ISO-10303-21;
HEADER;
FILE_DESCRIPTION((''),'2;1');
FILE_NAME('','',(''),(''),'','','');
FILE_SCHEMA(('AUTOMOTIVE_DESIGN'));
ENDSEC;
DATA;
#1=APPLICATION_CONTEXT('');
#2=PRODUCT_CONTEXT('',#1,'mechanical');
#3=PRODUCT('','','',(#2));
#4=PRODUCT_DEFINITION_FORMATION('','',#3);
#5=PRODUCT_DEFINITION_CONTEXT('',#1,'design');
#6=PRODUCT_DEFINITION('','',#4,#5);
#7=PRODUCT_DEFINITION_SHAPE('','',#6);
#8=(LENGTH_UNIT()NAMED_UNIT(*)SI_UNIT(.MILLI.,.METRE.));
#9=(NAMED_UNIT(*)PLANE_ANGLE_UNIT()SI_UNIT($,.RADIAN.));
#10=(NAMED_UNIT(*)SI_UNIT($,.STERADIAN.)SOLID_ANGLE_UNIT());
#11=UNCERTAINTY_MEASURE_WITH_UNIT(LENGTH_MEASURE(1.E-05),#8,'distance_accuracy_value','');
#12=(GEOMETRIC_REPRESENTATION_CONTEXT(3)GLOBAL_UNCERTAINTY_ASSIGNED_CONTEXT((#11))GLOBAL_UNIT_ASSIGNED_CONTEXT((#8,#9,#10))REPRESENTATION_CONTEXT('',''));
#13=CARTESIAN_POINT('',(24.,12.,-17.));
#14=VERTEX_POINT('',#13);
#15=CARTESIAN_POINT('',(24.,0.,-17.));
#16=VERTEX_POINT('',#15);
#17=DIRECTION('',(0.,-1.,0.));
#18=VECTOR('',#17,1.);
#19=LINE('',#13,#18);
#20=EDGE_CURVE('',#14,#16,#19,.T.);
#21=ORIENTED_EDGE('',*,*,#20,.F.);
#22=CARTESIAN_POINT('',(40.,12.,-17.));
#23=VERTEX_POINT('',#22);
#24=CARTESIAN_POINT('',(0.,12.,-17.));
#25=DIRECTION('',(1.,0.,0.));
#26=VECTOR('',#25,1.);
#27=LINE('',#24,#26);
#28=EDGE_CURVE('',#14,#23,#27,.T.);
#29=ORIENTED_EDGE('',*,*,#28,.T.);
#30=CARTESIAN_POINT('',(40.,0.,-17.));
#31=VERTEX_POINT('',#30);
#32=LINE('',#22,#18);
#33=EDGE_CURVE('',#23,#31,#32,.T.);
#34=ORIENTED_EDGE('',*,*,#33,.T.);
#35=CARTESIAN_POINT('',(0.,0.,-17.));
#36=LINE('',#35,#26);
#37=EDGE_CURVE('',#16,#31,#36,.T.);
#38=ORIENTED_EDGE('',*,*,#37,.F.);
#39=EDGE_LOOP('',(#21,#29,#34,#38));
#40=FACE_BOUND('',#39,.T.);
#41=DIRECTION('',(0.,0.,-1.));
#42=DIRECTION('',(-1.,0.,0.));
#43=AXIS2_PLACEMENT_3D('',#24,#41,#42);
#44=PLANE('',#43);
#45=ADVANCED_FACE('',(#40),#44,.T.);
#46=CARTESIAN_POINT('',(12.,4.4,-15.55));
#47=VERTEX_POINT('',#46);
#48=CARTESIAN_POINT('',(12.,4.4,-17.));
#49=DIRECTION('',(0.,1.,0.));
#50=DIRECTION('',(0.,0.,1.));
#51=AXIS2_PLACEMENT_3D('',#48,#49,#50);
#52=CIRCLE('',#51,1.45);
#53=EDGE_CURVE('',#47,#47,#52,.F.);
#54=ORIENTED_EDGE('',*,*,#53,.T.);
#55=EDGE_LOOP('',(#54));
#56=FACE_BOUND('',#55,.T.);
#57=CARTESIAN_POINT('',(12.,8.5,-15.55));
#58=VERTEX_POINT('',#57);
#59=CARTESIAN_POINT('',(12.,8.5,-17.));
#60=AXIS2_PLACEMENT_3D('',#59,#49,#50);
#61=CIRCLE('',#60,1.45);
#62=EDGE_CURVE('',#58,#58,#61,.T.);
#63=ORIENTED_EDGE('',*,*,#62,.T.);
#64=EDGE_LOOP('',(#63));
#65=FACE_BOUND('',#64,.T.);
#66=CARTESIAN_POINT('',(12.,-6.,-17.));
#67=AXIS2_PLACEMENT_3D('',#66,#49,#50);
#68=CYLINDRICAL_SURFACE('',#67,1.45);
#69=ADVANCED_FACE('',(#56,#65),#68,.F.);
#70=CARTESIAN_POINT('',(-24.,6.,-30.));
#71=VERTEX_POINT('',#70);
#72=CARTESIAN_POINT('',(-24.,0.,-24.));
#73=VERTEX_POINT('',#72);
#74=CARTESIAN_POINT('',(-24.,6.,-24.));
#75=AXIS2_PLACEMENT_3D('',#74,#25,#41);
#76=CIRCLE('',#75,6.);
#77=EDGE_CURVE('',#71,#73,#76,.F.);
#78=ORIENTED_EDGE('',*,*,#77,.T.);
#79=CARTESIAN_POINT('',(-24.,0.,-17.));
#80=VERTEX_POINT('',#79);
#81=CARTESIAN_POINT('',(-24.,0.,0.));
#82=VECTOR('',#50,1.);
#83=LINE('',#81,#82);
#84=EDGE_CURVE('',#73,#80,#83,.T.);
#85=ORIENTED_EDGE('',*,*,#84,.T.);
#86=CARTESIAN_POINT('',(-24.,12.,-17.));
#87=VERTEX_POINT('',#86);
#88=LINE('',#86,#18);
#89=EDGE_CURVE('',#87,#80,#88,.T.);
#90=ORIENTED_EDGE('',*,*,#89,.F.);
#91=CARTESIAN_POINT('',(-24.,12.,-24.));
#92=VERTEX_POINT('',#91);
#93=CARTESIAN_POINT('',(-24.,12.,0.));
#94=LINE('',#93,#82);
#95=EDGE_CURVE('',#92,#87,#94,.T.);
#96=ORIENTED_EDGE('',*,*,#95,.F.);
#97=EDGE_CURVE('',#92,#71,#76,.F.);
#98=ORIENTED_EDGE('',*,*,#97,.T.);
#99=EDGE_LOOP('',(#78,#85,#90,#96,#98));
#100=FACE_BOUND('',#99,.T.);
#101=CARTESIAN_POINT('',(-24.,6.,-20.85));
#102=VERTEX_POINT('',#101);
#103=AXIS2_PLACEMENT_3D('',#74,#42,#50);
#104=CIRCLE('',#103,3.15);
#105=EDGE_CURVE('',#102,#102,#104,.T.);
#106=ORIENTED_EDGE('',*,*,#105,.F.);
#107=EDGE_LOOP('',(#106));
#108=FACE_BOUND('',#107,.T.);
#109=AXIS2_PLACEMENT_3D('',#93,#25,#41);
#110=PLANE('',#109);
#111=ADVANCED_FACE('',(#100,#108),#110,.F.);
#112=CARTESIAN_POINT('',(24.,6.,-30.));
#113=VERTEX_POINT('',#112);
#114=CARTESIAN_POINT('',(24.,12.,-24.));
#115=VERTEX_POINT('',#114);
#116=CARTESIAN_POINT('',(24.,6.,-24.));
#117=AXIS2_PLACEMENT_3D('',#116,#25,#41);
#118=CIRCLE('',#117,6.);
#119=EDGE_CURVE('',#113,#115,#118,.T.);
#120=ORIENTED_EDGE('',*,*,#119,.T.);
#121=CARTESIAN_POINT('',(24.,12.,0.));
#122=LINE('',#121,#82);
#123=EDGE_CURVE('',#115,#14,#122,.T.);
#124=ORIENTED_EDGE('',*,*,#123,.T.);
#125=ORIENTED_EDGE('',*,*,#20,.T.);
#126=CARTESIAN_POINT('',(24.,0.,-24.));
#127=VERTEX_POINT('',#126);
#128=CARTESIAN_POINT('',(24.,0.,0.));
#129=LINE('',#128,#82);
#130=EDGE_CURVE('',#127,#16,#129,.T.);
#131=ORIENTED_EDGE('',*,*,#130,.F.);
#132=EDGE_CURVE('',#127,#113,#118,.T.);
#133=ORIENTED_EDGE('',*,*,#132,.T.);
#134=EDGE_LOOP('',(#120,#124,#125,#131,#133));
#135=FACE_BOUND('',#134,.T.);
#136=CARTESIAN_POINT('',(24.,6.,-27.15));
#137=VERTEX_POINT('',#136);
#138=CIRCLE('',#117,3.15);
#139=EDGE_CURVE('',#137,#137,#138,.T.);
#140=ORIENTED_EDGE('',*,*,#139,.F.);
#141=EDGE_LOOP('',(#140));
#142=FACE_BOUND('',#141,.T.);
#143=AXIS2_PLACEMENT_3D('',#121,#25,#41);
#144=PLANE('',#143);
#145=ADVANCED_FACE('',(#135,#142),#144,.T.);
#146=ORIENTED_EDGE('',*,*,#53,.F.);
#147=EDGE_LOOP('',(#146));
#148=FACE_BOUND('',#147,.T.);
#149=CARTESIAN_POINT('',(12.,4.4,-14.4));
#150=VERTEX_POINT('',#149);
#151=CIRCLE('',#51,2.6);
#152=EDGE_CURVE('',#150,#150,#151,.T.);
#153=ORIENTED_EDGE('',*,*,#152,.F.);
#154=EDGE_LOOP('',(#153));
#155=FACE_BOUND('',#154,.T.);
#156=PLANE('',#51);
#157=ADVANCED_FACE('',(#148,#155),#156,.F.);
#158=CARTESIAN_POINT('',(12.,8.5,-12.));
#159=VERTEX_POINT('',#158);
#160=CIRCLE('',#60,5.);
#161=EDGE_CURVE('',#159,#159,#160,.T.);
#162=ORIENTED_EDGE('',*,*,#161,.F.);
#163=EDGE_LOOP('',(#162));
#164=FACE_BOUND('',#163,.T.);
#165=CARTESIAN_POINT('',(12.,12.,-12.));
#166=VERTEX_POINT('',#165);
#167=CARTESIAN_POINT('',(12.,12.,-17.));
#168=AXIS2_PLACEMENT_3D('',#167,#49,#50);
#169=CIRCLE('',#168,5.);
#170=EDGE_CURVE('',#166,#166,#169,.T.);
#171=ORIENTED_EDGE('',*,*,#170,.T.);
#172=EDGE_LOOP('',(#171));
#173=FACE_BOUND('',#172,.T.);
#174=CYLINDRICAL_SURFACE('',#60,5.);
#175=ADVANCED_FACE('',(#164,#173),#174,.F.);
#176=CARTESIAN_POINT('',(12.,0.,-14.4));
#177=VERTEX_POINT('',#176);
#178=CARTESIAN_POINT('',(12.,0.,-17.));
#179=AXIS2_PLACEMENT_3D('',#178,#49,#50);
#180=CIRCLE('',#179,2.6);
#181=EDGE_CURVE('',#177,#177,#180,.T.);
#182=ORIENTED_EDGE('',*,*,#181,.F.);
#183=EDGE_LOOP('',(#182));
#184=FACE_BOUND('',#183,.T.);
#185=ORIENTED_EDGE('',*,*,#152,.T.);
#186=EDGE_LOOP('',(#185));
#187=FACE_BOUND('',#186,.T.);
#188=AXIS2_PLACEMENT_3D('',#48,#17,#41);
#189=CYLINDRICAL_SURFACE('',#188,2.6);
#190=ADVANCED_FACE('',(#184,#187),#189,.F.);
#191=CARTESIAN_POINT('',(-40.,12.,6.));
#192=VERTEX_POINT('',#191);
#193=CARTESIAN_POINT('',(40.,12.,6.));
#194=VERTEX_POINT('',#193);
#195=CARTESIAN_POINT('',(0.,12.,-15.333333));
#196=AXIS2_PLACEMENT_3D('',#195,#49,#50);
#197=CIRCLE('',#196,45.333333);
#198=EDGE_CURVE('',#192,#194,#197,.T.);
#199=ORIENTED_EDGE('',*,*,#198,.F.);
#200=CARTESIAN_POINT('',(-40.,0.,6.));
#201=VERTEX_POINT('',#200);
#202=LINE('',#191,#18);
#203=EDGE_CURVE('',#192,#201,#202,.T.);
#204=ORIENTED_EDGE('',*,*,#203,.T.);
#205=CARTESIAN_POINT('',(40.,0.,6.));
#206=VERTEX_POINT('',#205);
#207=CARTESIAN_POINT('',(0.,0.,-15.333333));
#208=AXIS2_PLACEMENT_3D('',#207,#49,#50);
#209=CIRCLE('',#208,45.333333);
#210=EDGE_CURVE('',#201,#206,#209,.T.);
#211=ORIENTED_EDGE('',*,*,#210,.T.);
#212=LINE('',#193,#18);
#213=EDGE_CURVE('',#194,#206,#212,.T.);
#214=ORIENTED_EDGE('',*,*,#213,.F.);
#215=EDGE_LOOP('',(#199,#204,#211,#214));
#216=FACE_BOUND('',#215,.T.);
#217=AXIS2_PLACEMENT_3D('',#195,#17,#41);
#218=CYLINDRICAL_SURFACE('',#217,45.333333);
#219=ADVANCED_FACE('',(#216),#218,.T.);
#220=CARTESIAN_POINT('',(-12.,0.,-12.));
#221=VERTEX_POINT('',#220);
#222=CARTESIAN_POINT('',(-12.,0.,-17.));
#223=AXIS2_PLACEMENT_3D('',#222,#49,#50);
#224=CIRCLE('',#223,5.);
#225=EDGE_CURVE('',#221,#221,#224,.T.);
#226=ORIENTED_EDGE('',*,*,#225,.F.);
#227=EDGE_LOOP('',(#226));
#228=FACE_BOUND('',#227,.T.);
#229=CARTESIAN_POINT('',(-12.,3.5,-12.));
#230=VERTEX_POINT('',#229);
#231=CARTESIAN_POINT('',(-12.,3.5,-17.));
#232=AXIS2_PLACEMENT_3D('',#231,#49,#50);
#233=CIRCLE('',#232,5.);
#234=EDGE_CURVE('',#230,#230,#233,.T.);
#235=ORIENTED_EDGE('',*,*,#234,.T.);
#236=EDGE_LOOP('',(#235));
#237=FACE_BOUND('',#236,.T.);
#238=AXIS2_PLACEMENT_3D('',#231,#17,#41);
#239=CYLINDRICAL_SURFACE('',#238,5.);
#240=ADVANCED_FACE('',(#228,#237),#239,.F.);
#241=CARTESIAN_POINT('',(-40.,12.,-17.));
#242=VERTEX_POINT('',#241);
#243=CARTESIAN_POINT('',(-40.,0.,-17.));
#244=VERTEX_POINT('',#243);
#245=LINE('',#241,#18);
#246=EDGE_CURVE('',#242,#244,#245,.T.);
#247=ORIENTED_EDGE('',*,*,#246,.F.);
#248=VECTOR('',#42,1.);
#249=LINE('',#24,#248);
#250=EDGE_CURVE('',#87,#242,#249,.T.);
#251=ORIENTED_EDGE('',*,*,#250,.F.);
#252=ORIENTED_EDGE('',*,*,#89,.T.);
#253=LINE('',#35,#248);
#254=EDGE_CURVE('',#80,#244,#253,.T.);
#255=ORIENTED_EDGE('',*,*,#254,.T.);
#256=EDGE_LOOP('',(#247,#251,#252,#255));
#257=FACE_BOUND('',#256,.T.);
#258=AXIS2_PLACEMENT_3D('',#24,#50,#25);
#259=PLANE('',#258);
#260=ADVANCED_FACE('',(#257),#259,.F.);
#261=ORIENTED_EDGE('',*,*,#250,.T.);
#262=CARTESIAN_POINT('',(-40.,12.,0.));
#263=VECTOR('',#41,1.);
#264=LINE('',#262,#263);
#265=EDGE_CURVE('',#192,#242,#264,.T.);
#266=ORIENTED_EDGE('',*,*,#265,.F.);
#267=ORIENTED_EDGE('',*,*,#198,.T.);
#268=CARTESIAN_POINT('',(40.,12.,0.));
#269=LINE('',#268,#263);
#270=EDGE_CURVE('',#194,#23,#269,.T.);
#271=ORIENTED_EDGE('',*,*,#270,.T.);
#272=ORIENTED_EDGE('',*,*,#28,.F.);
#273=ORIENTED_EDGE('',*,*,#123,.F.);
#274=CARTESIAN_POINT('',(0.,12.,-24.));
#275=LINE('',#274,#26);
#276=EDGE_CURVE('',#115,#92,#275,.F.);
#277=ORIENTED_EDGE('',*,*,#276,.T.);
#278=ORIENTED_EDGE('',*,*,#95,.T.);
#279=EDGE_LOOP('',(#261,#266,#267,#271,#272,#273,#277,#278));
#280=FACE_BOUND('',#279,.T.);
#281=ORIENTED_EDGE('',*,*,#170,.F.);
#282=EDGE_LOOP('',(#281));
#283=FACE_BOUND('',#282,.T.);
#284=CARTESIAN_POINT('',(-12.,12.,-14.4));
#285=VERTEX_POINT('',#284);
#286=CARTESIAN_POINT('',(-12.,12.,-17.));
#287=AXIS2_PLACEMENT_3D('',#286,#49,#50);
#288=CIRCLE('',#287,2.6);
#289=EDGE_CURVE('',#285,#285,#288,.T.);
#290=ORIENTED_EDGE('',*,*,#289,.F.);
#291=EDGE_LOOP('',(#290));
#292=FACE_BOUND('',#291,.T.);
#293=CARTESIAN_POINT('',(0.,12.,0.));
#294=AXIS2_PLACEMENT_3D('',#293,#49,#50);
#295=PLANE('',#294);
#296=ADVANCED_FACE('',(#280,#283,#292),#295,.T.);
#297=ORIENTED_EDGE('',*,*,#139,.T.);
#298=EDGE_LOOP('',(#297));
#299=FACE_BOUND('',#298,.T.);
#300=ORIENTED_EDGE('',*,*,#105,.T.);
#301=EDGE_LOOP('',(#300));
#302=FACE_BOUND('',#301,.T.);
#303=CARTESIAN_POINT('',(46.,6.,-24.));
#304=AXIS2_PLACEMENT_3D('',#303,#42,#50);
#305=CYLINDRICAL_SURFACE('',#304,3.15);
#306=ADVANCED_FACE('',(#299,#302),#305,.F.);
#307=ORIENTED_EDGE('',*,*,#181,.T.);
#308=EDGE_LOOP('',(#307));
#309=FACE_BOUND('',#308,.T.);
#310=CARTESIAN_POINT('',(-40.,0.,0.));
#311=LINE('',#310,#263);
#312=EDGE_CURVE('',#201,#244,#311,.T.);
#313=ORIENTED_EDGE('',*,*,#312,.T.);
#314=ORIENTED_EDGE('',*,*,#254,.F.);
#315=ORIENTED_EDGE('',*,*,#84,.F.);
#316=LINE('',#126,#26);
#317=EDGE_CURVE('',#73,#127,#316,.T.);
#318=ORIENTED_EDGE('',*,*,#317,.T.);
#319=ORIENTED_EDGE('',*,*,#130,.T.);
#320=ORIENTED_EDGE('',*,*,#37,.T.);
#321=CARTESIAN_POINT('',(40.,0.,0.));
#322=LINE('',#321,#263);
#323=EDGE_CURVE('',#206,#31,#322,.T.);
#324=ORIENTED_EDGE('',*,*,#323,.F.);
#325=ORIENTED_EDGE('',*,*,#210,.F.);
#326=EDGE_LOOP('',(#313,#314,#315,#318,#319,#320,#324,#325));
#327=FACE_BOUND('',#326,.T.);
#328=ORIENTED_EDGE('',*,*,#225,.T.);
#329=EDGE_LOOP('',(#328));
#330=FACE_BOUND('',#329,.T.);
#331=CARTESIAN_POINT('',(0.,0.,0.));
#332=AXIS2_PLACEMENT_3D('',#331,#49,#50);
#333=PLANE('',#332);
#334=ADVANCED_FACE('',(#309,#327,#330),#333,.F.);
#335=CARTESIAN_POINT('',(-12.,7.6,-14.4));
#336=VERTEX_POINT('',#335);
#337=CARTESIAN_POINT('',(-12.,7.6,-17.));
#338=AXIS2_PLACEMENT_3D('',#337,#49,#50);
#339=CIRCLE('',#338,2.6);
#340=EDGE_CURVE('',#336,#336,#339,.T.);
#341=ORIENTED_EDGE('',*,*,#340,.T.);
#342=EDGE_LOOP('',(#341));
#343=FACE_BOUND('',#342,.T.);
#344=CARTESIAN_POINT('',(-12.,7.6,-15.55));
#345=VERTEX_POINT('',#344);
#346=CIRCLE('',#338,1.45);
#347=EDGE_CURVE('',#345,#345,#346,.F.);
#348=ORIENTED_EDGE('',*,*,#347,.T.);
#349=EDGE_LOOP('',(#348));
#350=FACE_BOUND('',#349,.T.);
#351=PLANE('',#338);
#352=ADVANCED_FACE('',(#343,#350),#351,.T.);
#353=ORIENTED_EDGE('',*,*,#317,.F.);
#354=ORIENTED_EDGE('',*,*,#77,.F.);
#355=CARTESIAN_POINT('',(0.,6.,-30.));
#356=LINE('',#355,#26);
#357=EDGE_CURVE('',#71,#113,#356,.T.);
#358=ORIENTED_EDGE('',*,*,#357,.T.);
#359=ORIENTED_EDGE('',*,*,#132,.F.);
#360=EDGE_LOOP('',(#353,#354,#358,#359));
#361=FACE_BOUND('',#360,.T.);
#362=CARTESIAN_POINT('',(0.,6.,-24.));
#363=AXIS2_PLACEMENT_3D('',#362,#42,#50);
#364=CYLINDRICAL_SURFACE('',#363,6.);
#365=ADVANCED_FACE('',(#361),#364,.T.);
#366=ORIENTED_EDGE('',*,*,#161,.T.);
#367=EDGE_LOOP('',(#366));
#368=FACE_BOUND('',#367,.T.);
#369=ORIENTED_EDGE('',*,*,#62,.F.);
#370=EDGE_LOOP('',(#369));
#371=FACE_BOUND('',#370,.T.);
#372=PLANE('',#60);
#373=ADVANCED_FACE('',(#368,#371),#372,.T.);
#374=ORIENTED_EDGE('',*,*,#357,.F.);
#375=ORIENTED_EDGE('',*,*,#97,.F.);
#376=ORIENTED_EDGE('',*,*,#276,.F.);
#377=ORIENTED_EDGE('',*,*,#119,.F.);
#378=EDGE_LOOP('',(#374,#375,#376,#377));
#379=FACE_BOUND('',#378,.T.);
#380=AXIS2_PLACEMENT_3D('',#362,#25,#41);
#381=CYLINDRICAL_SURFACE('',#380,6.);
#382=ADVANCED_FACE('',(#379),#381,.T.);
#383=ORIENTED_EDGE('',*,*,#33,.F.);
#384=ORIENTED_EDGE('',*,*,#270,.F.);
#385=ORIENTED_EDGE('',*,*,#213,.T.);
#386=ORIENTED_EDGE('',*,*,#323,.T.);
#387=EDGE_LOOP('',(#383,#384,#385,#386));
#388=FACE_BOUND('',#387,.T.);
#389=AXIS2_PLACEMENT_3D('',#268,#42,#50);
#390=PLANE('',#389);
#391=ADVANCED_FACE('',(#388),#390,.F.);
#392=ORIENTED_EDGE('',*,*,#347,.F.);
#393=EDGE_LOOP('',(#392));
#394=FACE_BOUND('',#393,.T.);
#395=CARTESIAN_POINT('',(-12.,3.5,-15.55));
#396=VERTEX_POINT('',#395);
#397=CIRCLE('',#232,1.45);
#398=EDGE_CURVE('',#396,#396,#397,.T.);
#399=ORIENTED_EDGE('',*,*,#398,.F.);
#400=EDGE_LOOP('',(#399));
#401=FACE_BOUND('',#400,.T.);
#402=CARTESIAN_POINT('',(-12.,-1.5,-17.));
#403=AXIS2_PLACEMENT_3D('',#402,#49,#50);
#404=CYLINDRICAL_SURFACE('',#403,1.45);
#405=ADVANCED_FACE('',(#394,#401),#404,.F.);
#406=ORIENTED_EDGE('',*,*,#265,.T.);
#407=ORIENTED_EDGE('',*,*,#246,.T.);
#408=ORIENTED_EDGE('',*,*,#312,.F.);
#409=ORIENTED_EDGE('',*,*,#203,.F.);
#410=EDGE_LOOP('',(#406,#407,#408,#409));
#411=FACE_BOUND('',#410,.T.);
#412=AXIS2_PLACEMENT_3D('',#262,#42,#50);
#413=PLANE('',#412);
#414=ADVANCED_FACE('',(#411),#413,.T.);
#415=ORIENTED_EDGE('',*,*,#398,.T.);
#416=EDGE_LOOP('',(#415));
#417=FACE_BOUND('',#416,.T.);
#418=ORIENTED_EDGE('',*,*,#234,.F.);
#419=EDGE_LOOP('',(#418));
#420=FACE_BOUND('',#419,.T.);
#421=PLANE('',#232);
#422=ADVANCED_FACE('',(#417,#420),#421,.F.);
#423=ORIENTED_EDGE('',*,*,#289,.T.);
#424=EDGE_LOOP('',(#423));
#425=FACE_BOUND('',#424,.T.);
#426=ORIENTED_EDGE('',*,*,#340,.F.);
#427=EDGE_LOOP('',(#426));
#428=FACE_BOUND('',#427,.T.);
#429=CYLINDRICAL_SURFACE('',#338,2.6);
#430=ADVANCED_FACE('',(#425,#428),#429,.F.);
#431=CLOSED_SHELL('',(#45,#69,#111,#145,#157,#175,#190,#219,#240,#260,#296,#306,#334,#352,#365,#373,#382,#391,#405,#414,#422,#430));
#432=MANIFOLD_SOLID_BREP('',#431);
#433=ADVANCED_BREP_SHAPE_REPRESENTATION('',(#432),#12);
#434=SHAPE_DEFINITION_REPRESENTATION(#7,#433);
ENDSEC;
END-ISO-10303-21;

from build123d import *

# Parameters (mm, degrees)
BOSS_EXTRUDE1_DEPTH = 12
FILLET1_R           = 6
SKETCH2_R           = 3.15
CUT_EXTRUDE1_DEPTH  = 70
CUT_EXTRUDE2_START  = -12
SKETCH3_R           = 5
CUT_EXTRUDE2_DEPTH  = 3.5
SKETCH3_3_R         = 1.45
CUT_EXTRUDE3_DEPTH  = 13.5
SKETCH3_4_R         = 2.6
CUT_EXTRUDE4_DEPTH  = 4.4
SKETCH3_5_R         = 5
CUT_EXTRUDE5_DEPTH  = 3.5
SKETCH3_6_R         = 1.45
CUT_EXTRUDE6_DEPTH  = 18
CUT_EXTRUDE7_START  = -12
SKETCH3_7_R         = 2.6
CUT_EXTRUDE7_DEPTH  = 4.4


with BuildPart() as part:
    # Sketch1 → Boss-Extrude1 (new body)
    with BuildSketch(Plane(origin=(0, 0, 0), x_dir=(1, 0, 0), z_dir=(0, 1, 0))):
        with BuildLine():
            ThreePointArc((-40, -6), (-23.323807589, -23.539679293), (-2.2e-08, -30))
            ThreePointArc((-2.2e-08, -30), (23.32380757, -23.539679305), (40, -6))
            Line((40, -6), (40, 17))
            Line((40, 17), (24, 17))
            Line((24, 17), (24, 30))
            Line((24, 30), (-24, 30))
            Line((-24, 30), (-24, 17))
            Line((-24, 17), (-40, 17))
            Line((-40, 17), (-40, -6))
        make_face()
    extrude(amount=BOSS_EXTRUDE1_DEPTH)

    # Fillet1
    fillet1_edges = [part.edges().sort_by_distance(p)[0] for p in [
        (0, 0, -30),
        (0, 12, -30),
    ]]
    fillet(fillet1_edges, radius=FILLET1_R - 0.0001)  # a hair under: the kernel refuses the full size

    # Sketch2 → Cut-Extrude1 (cut)
    with BuildSketch(Plane.ZY.offset(24)):
        with Locations((-24, 6)):
            Circle(SKETCH2_R)
    extrude(amount=-CUT_EXTRUDE1_DEPTH, mode=Mode.SUBTRACT)

    # Sketch3 → Cut-Extrude2 (cut)
    with BuildSketch(Plane(origin=(0, 12, 0), x_dir=(1, 0, 0), z_dir=(0, 1, 0)).offset(CUT_EXTRUDE2_START)):
        with Locations(Location((-12, 17, 0), (0, 0, 270))):
            Circle(SKETCH3_R)
    extrude(amount=CUT_EXTRUDE2_DEPTH, mode=Mode.SUBTRACT)

    # Sketch3<3> → Cut-Extrude3 (cut)
    with BuildSketch(Plane(origin=(0, 12, 0), x_dir=(1, 0, 0), z_dir=(0, 1, 0))):
        with Locations(Location((-12, 17, 0), (0, 0, 270))):
            Circle(SKETCH3_3_R)
    extrude(amount=-CUT_EXTRUDE3_DEPTH, mode=Mode.SUBTRACT)

    # Sketch3<4> → Cut-Extrude4 (cut)
    with BuildSketch(Plane(origin=(0, 12, 0), x_dir=(1, 0, 0), z_dir=(0, 1, 0))):
        with Locations(Location((-12, 17, 0), (0, 0, 270))):
            Circle(SKETCH3_4_R)
    extrude(amount=-CUT_EXTRUDE4_DEPTH, mode=Mode.SUBTRACT)

    # Sketch3<5> → Cut-Extrude5 (cut)
    with BuildSketch(Plane(origin=(0, 12, 0), x_dir=(1, 0, 0), z_dir=(0, 1, 0))):
        with Locations(Location((12, 17, 0), (0, 0, 270))):
            Circle(SKETCH3_5_R)
    extrude(amount=-CUT_EXTRUDE5_DEPTH, mode=Mode.SUBTRACT)

    # Sketch3<6> → Cut-Extrude6 (cut)
    with BuildSketch(Plane(origin=(0, 12, 0), x_dir=(1, 0, 0), z_dir=(0, 1, 0))):
        with Locations(Location((12, 17, 0), (0, 0, 270))):
            Circle(SKETCH3_6_R)
    extrude(amount=-CUT_EXTRUDE6_DEPTH, mode=Mode.SUBTRACT)

    # Sketch3<7> → Cut-Extrude7 (cut)
    with BuildSketch(Plane(origin=(0, 12, 0), x_dir=(1, 0, 0), z_dir=(0, 1, 0)).offset(CUT_EXTRUDE7_START)):
        with Locations(Location((12, 17, 0), (0, 0, 270))):
            Circle(SKETCH3_7_R)
    extrude(amount=CUT_EXTRUDE7_DEPTH, mode=Mode.SUBTRACT)


solid = part.part
